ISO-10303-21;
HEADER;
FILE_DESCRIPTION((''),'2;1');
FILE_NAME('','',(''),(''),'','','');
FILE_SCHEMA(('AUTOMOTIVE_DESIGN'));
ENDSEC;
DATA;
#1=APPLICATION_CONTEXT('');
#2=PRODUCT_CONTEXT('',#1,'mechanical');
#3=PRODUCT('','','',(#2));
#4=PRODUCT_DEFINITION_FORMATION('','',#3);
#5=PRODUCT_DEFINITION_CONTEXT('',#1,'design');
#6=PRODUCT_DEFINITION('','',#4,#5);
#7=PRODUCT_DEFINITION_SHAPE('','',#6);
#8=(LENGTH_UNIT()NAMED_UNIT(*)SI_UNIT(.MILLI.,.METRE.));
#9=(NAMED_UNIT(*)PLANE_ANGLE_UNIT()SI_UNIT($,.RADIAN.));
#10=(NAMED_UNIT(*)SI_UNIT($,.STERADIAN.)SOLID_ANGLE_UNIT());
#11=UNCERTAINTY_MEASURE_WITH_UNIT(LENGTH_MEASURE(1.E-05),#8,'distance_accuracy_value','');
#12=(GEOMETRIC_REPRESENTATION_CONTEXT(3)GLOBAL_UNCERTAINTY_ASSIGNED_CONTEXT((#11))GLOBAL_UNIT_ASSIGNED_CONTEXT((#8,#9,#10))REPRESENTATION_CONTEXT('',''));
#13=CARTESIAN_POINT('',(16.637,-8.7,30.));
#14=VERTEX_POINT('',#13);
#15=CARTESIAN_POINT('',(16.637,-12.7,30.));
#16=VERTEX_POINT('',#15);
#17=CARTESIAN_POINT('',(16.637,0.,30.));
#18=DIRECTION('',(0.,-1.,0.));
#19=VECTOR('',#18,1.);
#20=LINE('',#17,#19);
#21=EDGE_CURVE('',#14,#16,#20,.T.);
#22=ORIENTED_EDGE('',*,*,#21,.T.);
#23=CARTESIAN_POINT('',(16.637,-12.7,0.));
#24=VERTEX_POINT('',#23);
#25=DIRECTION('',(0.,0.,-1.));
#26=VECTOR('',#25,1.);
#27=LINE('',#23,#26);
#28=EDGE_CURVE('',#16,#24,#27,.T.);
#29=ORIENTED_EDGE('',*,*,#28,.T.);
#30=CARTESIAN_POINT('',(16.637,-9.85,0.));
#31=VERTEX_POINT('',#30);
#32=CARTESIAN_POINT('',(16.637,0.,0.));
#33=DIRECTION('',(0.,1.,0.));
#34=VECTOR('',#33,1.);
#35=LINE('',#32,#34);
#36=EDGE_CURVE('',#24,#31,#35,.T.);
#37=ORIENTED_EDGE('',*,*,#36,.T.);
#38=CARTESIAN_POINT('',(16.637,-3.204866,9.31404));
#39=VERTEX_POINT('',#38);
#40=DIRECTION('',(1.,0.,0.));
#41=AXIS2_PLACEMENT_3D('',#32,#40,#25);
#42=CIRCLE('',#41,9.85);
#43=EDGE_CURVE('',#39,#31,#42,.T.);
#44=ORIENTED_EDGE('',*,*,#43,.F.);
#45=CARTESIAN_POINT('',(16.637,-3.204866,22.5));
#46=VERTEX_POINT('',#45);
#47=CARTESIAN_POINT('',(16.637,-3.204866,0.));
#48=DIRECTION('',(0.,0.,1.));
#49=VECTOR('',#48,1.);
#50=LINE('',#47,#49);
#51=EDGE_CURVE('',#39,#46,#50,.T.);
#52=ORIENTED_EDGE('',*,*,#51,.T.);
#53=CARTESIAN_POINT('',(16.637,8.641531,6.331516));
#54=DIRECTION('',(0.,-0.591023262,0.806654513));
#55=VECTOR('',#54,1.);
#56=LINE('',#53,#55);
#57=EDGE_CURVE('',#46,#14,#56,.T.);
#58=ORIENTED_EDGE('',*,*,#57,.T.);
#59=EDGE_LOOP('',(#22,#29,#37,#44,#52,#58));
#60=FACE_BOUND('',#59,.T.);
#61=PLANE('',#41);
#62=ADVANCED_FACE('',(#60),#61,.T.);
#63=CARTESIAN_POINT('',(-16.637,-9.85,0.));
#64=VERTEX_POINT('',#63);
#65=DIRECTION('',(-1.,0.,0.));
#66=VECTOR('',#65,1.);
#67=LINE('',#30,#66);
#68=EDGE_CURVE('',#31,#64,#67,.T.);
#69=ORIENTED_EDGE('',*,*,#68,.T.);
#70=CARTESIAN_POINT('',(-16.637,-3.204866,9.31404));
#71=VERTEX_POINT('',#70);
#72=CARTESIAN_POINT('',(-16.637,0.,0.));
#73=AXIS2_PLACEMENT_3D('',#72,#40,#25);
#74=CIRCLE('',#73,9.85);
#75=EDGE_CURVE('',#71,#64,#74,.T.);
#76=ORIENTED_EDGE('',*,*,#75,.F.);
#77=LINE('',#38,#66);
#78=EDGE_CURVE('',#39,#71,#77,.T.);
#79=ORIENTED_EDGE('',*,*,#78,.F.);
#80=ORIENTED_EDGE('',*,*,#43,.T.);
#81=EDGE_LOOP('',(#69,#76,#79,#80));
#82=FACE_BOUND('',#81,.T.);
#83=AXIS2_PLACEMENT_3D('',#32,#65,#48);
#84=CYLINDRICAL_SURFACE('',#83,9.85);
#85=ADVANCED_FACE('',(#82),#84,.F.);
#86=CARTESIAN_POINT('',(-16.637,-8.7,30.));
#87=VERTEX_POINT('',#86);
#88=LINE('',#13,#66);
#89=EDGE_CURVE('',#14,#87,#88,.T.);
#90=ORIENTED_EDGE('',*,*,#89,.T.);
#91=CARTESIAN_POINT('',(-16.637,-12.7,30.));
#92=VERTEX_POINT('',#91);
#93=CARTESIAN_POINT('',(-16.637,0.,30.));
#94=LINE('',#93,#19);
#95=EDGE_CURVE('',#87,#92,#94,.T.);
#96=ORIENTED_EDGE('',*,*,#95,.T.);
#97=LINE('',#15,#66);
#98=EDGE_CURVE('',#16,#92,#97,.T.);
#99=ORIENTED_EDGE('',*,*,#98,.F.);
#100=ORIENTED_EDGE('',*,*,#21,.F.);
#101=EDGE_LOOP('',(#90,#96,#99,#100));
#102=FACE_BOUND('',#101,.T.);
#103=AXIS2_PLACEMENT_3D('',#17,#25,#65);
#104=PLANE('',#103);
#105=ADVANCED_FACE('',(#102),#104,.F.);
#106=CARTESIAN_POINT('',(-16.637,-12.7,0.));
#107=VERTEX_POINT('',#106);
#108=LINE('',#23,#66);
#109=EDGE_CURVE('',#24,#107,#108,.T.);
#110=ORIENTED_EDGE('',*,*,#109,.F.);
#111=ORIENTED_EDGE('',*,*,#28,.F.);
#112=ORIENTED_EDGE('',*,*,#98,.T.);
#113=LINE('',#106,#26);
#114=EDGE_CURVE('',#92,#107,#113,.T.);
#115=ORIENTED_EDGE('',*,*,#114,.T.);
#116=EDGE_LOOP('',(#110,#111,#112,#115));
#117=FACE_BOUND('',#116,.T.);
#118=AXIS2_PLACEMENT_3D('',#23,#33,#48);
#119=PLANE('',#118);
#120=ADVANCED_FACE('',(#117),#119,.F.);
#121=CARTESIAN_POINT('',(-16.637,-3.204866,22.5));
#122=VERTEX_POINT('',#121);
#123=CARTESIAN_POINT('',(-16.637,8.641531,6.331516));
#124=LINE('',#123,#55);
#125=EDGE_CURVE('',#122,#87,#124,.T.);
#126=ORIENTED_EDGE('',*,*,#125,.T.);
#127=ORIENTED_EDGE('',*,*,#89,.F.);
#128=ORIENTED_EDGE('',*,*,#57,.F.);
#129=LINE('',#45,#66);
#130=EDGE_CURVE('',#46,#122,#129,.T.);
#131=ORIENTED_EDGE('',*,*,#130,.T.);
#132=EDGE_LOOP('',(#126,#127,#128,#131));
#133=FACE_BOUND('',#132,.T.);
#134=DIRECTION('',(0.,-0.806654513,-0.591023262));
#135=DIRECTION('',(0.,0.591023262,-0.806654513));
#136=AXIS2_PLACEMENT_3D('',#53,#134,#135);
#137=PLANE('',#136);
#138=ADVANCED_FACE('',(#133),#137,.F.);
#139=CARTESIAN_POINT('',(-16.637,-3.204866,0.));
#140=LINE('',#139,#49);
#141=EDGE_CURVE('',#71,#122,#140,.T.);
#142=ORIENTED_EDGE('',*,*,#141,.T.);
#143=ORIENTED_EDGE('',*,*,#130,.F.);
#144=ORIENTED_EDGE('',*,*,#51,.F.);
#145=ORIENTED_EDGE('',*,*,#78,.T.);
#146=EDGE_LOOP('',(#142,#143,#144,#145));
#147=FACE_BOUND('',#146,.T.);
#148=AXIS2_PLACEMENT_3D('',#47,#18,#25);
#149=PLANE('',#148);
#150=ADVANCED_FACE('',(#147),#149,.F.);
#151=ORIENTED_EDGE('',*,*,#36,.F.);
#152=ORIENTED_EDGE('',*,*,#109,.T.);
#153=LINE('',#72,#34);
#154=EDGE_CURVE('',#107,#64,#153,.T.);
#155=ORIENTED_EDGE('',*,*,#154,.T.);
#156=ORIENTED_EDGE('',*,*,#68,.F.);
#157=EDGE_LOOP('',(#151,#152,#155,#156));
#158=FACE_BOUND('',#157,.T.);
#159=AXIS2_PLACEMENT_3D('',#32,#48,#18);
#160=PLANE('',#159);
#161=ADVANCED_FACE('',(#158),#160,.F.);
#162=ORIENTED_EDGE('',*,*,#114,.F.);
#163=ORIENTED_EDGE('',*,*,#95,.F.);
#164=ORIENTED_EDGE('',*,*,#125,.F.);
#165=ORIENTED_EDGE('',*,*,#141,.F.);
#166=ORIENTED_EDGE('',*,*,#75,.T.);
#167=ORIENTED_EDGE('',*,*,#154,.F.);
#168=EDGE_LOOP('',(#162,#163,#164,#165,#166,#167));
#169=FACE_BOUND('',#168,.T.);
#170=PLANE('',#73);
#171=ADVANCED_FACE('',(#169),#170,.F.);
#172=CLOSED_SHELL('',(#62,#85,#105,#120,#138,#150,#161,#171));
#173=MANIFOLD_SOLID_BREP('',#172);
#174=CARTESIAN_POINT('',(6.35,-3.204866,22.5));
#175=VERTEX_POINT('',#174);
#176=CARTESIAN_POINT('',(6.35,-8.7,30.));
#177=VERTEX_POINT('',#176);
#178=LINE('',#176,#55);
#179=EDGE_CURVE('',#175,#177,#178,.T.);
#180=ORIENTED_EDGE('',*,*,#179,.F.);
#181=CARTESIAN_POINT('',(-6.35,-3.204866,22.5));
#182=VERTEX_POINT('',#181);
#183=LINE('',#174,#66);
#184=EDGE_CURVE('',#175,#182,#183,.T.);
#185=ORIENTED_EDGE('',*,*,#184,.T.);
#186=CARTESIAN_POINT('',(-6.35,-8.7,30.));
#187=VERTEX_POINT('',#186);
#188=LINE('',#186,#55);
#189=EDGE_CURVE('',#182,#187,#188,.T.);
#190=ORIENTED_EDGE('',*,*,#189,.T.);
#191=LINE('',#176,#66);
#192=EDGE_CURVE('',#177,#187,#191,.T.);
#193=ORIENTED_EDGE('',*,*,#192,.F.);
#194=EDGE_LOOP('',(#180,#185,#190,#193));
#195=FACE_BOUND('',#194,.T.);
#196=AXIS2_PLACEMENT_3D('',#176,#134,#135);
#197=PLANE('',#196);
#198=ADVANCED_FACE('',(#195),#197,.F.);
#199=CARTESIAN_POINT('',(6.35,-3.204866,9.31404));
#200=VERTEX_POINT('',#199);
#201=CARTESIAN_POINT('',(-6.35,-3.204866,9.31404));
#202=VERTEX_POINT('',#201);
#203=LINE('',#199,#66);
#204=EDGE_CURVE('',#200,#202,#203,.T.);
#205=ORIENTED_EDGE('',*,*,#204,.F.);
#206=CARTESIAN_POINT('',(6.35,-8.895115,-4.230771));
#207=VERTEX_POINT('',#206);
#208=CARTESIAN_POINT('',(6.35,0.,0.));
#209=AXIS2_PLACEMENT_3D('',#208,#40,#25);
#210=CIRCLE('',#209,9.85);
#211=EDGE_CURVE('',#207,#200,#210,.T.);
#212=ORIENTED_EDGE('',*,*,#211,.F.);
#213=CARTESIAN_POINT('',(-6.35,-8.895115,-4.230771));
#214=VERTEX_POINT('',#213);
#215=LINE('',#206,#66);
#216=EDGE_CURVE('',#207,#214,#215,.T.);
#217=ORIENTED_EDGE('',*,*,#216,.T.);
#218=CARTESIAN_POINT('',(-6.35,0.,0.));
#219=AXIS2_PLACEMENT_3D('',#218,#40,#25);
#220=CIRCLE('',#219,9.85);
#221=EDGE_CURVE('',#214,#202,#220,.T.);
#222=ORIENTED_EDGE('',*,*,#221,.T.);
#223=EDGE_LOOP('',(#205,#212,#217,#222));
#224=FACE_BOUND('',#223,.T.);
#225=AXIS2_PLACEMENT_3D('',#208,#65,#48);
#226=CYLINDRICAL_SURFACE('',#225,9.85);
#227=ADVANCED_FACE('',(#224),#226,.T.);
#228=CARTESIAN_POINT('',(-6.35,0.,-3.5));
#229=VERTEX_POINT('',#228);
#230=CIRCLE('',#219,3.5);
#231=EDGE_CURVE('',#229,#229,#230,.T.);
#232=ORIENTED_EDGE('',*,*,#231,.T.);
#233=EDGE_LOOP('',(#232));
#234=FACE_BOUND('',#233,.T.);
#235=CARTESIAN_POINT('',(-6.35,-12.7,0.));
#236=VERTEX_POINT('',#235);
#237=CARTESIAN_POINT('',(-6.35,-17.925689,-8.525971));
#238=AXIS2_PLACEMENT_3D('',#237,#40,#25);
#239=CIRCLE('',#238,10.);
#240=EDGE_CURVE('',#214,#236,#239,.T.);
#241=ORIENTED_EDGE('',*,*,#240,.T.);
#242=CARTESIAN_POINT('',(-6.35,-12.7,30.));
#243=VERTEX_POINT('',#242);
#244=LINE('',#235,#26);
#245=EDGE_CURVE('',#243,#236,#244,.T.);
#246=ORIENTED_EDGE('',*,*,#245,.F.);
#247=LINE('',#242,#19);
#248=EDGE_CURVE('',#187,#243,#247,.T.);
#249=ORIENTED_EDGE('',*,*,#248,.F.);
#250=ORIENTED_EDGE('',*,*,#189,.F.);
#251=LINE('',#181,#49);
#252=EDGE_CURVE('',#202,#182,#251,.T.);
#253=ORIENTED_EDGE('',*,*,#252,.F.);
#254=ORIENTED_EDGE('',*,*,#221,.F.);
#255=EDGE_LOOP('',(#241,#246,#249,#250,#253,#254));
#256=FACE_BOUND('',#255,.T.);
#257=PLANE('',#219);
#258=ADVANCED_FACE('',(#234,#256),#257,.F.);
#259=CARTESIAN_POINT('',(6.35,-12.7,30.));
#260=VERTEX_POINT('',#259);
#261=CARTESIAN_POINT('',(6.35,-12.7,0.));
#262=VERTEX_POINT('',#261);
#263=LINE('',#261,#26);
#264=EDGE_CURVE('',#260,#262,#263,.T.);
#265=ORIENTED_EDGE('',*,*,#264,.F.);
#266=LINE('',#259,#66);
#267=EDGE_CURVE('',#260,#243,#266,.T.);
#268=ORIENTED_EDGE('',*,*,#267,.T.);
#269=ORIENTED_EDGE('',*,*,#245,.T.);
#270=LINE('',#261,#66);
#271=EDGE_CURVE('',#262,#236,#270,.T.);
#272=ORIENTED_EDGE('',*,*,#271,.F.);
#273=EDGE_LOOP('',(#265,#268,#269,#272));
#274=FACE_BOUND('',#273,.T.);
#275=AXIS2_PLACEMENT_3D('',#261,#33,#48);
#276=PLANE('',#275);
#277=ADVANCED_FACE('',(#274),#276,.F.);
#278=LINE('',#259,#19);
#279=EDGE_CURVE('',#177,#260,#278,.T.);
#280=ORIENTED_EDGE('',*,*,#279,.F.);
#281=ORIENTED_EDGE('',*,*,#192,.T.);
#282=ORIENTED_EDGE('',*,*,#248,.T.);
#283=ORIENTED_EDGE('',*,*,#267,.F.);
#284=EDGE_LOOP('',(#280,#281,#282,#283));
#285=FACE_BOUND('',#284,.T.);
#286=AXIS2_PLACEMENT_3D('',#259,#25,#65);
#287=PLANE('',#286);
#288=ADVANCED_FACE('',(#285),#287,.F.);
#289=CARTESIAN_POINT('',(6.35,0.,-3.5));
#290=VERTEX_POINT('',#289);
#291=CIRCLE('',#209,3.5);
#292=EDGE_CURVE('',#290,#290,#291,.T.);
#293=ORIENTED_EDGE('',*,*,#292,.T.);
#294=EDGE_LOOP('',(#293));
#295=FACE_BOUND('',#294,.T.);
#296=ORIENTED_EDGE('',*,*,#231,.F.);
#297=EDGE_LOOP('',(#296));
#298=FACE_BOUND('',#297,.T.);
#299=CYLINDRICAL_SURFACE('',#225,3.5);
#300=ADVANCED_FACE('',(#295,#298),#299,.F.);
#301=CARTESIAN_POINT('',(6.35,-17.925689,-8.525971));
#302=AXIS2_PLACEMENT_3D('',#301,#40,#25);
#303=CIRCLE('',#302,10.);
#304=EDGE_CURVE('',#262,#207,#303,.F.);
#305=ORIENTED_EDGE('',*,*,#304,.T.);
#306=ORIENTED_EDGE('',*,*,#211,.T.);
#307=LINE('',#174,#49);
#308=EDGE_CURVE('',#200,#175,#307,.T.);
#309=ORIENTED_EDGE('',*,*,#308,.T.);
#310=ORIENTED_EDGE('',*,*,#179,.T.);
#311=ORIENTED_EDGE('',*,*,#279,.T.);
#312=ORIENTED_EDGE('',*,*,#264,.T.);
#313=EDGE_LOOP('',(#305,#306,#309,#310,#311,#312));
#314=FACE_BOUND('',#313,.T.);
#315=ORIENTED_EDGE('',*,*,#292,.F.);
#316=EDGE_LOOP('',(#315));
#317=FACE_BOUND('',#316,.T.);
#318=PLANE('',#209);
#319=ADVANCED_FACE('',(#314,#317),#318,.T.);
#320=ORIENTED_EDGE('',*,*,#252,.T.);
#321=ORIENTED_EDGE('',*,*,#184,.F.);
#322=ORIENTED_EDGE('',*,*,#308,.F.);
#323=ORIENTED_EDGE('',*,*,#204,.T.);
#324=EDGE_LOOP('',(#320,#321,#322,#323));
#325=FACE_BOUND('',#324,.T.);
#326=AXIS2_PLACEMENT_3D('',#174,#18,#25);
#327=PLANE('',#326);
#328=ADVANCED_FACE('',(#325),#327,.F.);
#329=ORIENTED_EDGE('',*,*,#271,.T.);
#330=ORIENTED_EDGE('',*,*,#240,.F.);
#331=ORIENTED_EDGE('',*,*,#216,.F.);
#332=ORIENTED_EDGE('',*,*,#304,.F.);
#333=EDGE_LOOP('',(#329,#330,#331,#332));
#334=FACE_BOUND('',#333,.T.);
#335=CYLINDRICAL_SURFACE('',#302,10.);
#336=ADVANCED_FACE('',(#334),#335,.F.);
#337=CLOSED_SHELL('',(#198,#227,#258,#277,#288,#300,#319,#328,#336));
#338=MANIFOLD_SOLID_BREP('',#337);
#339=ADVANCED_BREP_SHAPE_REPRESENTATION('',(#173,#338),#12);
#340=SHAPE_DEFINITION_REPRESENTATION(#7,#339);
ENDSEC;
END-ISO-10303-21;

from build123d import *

# Parameters (mm, degrees)
SKETCH1_R           = 3.5
BOSS_EXTRUDE1_DEPTH = 6.35
BOSS_EXTRUDE2_DEPTH = 16.637
FILLET1_R           = 10


with BuildPart() as part:
    # Sketch1 → Boss-Extrude1 (new, symmetric)
    with BuildSketch(Plane(origin=(0, 0, 0), x_dir=(0, 0, -1), z_dir=(1, 0, 0))):
        with BuildLine():
            Line((0, -12.7), (-30, -12.7))
            Line((-30, -12.7), (-30, -8.7))
            Line((-30, -8.7), (-22.5, -3.204866216))
            Line((-22.5, -3.204866216), (-9.314039539, -3.204866216))
            ThreePointArc((-9.314039539, -3.204866216), (5.720776511, 8.018429779), (0, -9.85))
            Line((0, -9.85), (0, -12.7))
        make_face()
        Circle(SKETCH1_R, mode=Mode.SUBTRACT)
    extrude(amount=BOSS_EXTRUDE1_DEPTH, both=True)

    # Fillet1
    # the kernel refuses this fillet: 10 mm, written as the material it adds along each edge
    with BuildSketch(Plane(origin=(-6.35, -9.85, 0), x_dir=(0, -1, 0), z_dir=(1, 0, 0))) as fillet1_piece_1:
        with BuildLine():
            CenterArc((8.075688976, 8.525970603), FILLET1_R, 205.437097531, 33.058176113)
            Line((-0.954884815, 4.230771307), (-1.135496291, 4.144867321))
            ThreePointArc((-1.135496291, 4.144867321), (-0.436778957, 2.124563391), (-0.2, 0))
            Line((-0.2, 0), (0, -0.2))
            ThreePointArc((0, -0.2), (1.425, -0.2), (2.74548622, -0.170519412))
            Line((2.74548622, -0.170519412), (2.85, 0))
        make_face()
    extrude(amount=12.7)


with BuildPart() as body_2:
    # Sketch4 → Boss-Extrude2 (new, symmetric)
    with BuildSketch(Plane(origin=(0, 0, 0), x_dir=(0, 0, -1), z_dir=(1, 0, 0))):
        with BuildLine():
            Line((-30, -12.7), (0, -12.7))
            Line((0, -12.7), (0, -9.85))
            ThreePointArc((0, -9.85), (-5.720776511, -8.018429779), (-9.314039539, -3.204866216))
            Line((-9.314039539, -3.204866216), (-22.5, -3.204866216))
            Line((-22.5, -3.204866216), (-30, -8.7))
            Line((-30, -8.7), (-30, -12.7))
        make_face()
    extrude(amount=BOSS_EXTRUDE2_DEPTH, both=True)


solid = Compound([part.part, body_2.part])
